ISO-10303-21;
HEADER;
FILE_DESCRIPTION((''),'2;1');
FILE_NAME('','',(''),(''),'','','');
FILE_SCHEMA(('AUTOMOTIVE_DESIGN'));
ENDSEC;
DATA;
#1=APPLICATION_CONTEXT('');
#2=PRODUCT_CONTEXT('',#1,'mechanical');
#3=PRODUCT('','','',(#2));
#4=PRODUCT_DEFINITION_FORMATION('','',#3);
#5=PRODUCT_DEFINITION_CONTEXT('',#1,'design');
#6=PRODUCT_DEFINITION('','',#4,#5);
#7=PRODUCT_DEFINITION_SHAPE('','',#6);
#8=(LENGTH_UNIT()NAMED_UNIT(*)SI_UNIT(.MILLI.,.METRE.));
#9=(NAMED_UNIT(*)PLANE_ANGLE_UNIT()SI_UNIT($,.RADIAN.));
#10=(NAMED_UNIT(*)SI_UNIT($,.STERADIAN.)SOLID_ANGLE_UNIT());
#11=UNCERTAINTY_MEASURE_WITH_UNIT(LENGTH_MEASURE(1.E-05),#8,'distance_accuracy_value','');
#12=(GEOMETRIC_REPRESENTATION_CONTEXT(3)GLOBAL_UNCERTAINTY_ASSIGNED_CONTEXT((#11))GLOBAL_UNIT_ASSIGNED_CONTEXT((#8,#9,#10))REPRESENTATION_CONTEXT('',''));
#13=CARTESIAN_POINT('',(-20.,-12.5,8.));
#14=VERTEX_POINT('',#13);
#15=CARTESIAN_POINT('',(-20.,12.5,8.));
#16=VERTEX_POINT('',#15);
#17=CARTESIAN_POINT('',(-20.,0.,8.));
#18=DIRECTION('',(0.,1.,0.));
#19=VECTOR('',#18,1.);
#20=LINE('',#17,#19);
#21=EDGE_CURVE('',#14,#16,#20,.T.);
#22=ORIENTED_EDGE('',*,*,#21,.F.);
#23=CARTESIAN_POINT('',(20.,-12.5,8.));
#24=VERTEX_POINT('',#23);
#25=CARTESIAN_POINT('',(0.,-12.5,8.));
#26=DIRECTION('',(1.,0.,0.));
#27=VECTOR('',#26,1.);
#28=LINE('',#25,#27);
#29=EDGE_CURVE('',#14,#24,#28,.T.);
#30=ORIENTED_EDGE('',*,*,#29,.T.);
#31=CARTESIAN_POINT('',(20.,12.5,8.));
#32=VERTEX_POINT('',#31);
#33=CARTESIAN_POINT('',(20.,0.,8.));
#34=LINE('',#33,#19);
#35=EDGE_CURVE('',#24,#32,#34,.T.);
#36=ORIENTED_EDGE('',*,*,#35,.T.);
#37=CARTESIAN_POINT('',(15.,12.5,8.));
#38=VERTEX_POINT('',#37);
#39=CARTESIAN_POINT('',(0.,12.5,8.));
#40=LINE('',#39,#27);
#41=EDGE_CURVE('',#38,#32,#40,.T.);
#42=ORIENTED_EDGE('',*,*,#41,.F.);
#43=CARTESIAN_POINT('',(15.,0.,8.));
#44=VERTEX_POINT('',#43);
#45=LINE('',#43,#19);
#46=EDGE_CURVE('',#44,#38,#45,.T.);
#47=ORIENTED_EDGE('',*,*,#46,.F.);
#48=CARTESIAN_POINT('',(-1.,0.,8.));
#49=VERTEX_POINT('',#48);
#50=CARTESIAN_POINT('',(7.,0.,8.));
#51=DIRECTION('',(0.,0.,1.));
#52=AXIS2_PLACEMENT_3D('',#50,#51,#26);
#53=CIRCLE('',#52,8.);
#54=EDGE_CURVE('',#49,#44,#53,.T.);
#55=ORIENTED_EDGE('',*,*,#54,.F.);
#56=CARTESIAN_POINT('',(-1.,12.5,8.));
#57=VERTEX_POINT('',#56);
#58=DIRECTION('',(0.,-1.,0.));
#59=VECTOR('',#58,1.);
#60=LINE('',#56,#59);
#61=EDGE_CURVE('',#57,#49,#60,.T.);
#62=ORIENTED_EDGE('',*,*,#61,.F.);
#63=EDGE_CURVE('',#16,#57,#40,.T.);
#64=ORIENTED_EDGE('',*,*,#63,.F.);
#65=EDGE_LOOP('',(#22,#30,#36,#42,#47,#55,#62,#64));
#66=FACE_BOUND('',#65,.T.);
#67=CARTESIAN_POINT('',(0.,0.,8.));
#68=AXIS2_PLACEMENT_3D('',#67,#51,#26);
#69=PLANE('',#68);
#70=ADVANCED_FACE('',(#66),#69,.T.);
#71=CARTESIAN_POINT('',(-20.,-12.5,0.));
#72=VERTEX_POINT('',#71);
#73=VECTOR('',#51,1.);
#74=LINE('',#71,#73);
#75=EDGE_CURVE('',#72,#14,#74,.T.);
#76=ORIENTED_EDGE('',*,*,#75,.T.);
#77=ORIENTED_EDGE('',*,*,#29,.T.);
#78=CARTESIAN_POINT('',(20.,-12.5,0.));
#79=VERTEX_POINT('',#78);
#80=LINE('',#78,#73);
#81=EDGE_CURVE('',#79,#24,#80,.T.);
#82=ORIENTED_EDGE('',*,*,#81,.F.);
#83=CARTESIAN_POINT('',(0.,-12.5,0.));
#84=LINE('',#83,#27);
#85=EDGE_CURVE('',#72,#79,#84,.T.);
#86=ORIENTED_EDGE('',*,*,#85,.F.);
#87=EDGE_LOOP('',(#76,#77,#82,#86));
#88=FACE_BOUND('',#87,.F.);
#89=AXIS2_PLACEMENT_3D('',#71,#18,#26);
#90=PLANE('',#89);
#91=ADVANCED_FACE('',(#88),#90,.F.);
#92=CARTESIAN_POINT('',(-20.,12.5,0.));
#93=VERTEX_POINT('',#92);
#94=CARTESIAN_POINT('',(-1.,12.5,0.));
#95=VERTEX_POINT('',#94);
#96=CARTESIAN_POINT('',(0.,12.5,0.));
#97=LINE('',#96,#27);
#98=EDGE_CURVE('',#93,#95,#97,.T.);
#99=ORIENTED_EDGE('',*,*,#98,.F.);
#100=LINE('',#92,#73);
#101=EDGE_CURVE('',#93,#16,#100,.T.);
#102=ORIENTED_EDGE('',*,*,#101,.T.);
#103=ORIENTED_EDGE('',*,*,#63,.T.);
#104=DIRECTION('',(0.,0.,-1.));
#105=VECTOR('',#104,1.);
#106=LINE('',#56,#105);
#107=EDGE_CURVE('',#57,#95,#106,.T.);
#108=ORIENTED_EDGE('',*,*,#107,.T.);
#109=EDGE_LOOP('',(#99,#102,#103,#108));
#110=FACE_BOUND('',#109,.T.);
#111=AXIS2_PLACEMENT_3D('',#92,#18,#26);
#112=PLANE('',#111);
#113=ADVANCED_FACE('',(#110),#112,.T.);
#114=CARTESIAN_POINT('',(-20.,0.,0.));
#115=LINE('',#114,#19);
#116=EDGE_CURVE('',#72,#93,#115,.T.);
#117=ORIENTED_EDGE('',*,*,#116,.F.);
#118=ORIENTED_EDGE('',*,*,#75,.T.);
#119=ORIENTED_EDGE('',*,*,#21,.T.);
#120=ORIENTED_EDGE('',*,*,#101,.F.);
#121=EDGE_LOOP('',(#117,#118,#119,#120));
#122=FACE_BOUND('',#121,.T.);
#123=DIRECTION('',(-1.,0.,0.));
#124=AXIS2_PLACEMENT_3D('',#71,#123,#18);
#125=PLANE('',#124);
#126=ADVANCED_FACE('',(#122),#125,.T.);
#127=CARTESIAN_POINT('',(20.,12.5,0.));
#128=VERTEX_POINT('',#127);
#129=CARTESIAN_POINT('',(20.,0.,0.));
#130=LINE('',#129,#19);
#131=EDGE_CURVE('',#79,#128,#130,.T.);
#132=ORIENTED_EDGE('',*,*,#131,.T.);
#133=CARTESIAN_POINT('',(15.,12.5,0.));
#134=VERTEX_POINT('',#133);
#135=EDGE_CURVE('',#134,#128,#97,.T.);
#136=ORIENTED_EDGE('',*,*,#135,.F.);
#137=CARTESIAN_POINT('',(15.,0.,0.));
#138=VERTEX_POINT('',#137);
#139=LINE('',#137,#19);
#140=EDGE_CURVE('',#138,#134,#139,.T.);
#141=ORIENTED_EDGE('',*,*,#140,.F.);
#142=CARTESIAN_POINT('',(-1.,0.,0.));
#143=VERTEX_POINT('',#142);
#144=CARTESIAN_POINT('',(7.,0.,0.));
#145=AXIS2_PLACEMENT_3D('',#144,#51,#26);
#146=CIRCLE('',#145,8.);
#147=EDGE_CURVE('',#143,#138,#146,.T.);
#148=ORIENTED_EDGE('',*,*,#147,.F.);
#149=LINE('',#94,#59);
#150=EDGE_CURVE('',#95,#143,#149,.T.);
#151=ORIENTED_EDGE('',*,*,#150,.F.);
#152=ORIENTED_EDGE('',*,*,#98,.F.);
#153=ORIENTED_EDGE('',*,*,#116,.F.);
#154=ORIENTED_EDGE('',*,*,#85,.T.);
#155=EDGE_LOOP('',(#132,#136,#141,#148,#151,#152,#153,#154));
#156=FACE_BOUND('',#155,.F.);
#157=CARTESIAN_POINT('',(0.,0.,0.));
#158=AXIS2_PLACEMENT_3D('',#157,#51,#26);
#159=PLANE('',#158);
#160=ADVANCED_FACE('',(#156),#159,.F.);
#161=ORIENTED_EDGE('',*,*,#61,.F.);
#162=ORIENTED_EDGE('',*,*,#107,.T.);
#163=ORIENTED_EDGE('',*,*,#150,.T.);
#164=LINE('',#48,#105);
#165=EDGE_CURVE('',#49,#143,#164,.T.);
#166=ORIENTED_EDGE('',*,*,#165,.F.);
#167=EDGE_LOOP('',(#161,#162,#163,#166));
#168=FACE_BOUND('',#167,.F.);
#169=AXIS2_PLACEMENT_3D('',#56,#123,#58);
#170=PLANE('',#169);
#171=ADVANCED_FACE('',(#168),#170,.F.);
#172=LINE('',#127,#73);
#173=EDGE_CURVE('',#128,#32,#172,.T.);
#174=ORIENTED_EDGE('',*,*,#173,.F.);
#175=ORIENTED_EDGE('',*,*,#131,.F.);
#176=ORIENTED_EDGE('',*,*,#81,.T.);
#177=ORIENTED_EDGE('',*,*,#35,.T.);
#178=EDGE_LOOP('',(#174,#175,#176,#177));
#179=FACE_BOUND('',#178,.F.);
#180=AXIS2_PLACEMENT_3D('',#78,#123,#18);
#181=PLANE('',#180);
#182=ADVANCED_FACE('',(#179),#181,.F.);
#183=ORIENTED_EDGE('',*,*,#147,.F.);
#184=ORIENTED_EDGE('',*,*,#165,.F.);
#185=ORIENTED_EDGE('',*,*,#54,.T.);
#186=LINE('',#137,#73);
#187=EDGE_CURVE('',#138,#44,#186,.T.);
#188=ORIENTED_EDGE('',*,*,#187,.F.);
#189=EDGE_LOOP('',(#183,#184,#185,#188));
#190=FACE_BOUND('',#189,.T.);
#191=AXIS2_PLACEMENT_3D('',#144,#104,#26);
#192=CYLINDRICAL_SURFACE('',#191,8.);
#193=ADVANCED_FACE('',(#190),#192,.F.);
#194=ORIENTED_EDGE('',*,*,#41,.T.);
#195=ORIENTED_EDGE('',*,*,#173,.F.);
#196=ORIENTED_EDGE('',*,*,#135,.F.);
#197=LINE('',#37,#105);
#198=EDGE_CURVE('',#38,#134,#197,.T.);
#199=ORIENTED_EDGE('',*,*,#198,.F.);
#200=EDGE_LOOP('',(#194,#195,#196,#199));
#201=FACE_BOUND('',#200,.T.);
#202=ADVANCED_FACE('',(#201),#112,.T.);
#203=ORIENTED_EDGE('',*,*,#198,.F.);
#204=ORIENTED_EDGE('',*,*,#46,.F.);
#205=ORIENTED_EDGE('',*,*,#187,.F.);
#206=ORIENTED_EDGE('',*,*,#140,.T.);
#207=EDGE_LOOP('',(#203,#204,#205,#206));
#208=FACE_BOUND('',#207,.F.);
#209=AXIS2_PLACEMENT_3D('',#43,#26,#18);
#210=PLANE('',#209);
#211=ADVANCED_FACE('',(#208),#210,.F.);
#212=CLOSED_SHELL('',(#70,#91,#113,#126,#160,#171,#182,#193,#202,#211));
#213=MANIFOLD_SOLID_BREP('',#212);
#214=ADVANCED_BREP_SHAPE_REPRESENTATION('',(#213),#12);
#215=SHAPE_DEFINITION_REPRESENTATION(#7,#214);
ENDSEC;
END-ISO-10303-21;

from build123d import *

# Parameters (mm, degrees)
F0_W     = 40
F0_H     = 25
F0_R     = 8
F1_DEPTH = 8
F3_DEPTH = 8


# Not quite as in the source:
# - a feature of the source that left no trace in its solid (it failed there, or was rolled back) is left out


with BuildPart() as f1:
    # F0 (on Top) → F1 (new body)
    with BuildSketch(Plane.XY):
        Rectangle(F0_W, F0_H)
        with Locations((7, 0)):
            Circle(F0_R, mode=Mode.SUBTRACT)
    extrude(amount=F1_DEPTH)

    # F2 (on face) → F3 (cut, through all)
    with BuildSketch(Plane.XY.offset(8)):
        with BuildLine():
            Line((-1, 12.5), (-1, 0))
            ThreePointArc((-1, 0), (7, 8), (15, 0))
            Line((15, 0), (15, 12.5))
            Line((15, 12.5), (-1, 12.5))
        make_face()
    extrude(amount=-F3_DEPTH, mode=Mode.SUBTRACT)


solid = f1.part
